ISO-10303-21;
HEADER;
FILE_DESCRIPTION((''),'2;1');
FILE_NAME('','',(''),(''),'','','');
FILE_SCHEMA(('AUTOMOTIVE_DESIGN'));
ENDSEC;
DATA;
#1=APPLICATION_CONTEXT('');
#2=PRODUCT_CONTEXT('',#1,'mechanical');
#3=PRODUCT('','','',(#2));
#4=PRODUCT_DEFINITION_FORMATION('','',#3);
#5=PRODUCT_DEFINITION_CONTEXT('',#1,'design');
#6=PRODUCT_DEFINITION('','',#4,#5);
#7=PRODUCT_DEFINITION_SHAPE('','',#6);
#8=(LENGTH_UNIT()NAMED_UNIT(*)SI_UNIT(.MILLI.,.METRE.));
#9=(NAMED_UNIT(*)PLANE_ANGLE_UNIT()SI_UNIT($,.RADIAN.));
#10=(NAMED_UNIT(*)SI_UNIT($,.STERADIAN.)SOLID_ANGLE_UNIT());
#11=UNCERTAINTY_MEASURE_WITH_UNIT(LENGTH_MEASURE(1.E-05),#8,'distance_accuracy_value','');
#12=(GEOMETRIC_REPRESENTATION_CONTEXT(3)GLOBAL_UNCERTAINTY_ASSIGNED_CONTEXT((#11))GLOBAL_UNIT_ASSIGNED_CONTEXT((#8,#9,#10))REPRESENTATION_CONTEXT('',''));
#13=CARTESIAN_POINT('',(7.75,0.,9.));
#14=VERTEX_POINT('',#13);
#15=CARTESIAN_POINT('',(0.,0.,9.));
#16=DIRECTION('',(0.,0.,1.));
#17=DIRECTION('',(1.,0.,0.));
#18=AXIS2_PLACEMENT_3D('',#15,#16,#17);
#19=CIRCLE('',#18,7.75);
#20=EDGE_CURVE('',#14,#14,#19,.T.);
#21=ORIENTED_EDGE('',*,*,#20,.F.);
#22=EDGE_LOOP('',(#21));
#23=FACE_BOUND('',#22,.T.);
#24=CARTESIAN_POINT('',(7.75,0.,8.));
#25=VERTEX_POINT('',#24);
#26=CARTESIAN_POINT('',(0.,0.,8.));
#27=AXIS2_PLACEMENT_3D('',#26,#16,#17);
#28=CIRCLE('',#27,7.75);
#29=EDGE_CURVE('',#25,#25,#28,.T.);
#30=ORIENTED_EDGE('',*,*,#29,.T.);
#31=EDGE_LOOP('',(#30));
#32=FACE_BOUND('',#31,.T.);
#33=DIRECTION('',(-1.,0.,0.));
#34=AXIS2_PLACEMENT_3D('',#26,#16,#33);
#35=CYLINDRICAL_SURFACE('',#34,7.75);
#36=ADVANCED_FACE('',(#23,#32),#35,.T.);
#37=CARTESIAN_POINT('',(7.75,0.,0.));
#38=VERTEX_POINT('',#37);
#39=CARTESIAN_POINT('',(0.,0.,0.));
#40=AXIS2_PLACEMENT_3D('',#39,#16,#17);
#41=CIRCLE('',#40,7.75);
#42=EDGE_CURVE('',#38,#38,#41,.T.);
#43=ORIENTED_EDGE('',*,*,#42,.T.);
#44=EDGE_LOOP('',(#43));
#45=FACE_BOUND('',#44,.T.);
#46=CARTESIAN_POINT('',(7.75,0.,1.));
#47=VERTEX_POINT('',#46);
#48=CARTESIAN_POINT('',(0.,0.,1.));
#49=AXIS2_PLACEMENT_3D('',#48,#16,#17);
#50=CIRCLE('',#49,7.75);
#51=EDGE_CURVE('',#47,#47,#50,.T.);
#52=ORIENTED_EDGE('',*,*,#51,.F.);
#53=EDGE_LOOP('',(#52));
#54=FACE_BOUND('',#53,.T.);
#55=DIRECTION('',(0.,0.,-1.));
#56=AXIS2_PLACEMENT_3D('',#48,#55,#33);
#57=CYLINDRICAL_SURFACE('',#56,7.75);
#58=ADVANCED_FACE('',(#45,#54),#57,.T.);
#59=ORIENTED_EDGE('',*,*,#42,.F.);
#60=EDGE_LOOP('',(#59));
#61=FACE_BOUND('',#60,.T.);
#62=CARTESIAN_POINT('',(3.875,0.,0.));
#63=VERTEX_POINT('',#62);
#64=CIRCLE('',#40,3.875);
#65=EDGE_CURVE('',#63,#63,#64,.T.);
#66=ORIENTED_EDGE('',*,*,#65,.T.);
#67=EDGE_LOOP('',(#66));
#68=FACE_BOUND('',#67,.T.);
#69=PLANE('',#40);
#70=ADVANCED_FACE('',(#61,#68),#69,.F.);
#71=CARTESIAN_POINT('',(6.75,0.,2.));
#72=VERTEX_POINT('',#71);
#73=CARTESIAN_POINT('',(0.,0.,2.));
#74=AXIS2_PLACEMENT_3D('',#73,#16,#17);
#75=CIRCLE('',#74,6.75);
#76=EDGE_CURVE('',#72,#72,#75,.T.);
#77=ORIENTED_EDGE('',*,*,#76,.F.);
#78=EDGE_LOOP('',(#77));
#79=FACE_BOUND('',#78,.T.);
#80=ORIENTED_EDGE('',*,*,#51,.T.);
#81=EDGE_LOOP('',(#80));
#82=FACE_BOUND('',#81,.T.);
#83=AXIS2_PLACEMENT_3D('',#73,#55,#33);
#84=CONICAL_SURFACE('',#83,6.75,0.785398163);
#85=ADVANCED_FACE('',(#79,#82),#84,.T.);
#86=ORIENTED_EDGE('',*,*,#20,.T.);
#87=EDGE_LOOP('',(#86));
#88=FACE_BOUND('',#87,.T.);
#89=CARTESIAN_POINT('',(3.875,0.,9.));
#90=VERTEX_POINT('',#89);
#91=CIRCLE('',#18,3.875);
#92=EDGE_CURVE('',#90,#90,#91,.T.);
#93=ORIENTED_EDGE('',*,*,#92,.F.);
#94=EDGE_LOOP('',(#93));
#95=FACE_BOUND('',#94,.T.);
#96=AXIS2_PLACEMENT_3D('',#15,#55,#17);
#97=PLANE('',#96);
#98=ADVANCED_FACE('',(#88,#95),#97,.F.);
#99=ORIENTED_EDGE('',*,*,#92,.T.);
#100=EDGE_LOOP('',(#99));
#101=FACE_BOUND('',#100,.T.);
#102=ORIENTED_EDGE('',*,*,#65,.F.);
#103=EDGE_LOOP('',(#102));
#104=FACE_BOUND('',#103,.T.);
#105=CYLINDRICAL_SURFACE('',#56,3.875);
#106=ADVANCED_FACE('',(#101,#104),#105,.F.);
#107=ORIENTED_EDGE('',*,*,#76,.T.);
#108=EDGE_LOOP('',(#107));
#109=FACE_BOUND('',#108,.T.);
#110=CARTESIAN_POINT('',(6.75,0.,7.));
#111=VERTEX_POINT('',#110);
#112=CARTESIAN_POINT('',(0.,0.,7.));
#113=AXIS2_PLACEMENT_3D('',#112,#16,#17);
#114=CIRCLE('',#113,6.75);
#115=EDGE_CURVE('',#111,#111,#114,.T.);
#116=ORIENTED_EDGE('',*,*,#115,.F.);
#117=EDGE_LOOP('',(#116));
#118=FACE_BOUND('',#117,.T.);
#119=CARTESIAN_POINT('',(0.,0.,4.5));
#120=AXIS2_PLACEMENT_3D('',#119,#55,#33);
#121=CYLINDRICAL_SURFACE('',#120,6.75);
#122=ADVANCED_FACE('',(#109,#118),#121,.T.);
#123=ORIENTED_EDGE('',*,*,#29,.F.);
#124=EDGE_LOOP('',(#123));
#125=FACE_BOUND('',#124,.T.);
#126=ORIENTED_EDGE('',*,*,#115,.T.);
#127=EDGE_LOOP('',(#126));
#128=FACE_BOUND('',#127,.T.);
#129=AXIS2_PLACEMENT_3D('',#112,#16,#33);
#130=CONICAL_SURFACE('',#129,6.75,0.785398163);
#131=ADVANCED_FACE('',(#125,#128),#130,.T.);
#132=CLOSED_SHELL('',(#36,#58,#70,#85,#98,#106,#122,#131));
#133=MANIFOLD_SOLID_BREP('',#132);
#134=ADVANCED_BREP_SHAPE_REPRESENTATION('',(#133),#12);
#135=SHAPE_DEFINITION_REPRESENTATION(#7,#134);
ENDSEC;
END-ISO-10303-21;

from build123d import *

# Parameters (mm, degrees)
SKETCH1_R           = 7.75
SKETCH1_R_2         = 3.875
BOSS_EXTRUDE1_DEPTH = 1
SKETCH2_R           = 6.75
SKETCH2_R_2         = 3.875
BOSS_EXTRUDE2_DEPTH = 3.5
CHAMFER1_SIZE       = 1


with BuildPart() as part:
    # Sketch1 → Boss-Extrude1 (new body)
    with BuildSketch(Plane.XY):
        Circle(SKETCH1_R)
        Circle(SKETCH1_R_2, mode=Mode.SUBTRACT)
    extrude(amount=BOSS_EXTRUDE1_DEPTH)

    # Sketch2 → Boss-Extrude2 (add)
    with BuildSketch(Plane.XY.offset(1)):
        Circle(SKETCH2_R)
        Circle(SKETCH2_R_2, mode=Mode.SUBTRACT)
    extrude(amount=BOSS_EXTRUDE2_DEPTH)

    # Chamfer1
    chamfer1_edges = [part.edges().sort_by_distance(p)[0] for p in [
        (-6.75, 0, 1),
    ]]
    chamfer(chamfer1_edges, length=CHAMFER1_SIZE - 0.0001)  # a hair under: the kernel refuses the full size

    # Mirror5: part across plane


with BuildPart() as part_1:
    add(part.part)
    add(part.part.mirror(Plane.XY.offset(4.5)))


solid = part_1.part
